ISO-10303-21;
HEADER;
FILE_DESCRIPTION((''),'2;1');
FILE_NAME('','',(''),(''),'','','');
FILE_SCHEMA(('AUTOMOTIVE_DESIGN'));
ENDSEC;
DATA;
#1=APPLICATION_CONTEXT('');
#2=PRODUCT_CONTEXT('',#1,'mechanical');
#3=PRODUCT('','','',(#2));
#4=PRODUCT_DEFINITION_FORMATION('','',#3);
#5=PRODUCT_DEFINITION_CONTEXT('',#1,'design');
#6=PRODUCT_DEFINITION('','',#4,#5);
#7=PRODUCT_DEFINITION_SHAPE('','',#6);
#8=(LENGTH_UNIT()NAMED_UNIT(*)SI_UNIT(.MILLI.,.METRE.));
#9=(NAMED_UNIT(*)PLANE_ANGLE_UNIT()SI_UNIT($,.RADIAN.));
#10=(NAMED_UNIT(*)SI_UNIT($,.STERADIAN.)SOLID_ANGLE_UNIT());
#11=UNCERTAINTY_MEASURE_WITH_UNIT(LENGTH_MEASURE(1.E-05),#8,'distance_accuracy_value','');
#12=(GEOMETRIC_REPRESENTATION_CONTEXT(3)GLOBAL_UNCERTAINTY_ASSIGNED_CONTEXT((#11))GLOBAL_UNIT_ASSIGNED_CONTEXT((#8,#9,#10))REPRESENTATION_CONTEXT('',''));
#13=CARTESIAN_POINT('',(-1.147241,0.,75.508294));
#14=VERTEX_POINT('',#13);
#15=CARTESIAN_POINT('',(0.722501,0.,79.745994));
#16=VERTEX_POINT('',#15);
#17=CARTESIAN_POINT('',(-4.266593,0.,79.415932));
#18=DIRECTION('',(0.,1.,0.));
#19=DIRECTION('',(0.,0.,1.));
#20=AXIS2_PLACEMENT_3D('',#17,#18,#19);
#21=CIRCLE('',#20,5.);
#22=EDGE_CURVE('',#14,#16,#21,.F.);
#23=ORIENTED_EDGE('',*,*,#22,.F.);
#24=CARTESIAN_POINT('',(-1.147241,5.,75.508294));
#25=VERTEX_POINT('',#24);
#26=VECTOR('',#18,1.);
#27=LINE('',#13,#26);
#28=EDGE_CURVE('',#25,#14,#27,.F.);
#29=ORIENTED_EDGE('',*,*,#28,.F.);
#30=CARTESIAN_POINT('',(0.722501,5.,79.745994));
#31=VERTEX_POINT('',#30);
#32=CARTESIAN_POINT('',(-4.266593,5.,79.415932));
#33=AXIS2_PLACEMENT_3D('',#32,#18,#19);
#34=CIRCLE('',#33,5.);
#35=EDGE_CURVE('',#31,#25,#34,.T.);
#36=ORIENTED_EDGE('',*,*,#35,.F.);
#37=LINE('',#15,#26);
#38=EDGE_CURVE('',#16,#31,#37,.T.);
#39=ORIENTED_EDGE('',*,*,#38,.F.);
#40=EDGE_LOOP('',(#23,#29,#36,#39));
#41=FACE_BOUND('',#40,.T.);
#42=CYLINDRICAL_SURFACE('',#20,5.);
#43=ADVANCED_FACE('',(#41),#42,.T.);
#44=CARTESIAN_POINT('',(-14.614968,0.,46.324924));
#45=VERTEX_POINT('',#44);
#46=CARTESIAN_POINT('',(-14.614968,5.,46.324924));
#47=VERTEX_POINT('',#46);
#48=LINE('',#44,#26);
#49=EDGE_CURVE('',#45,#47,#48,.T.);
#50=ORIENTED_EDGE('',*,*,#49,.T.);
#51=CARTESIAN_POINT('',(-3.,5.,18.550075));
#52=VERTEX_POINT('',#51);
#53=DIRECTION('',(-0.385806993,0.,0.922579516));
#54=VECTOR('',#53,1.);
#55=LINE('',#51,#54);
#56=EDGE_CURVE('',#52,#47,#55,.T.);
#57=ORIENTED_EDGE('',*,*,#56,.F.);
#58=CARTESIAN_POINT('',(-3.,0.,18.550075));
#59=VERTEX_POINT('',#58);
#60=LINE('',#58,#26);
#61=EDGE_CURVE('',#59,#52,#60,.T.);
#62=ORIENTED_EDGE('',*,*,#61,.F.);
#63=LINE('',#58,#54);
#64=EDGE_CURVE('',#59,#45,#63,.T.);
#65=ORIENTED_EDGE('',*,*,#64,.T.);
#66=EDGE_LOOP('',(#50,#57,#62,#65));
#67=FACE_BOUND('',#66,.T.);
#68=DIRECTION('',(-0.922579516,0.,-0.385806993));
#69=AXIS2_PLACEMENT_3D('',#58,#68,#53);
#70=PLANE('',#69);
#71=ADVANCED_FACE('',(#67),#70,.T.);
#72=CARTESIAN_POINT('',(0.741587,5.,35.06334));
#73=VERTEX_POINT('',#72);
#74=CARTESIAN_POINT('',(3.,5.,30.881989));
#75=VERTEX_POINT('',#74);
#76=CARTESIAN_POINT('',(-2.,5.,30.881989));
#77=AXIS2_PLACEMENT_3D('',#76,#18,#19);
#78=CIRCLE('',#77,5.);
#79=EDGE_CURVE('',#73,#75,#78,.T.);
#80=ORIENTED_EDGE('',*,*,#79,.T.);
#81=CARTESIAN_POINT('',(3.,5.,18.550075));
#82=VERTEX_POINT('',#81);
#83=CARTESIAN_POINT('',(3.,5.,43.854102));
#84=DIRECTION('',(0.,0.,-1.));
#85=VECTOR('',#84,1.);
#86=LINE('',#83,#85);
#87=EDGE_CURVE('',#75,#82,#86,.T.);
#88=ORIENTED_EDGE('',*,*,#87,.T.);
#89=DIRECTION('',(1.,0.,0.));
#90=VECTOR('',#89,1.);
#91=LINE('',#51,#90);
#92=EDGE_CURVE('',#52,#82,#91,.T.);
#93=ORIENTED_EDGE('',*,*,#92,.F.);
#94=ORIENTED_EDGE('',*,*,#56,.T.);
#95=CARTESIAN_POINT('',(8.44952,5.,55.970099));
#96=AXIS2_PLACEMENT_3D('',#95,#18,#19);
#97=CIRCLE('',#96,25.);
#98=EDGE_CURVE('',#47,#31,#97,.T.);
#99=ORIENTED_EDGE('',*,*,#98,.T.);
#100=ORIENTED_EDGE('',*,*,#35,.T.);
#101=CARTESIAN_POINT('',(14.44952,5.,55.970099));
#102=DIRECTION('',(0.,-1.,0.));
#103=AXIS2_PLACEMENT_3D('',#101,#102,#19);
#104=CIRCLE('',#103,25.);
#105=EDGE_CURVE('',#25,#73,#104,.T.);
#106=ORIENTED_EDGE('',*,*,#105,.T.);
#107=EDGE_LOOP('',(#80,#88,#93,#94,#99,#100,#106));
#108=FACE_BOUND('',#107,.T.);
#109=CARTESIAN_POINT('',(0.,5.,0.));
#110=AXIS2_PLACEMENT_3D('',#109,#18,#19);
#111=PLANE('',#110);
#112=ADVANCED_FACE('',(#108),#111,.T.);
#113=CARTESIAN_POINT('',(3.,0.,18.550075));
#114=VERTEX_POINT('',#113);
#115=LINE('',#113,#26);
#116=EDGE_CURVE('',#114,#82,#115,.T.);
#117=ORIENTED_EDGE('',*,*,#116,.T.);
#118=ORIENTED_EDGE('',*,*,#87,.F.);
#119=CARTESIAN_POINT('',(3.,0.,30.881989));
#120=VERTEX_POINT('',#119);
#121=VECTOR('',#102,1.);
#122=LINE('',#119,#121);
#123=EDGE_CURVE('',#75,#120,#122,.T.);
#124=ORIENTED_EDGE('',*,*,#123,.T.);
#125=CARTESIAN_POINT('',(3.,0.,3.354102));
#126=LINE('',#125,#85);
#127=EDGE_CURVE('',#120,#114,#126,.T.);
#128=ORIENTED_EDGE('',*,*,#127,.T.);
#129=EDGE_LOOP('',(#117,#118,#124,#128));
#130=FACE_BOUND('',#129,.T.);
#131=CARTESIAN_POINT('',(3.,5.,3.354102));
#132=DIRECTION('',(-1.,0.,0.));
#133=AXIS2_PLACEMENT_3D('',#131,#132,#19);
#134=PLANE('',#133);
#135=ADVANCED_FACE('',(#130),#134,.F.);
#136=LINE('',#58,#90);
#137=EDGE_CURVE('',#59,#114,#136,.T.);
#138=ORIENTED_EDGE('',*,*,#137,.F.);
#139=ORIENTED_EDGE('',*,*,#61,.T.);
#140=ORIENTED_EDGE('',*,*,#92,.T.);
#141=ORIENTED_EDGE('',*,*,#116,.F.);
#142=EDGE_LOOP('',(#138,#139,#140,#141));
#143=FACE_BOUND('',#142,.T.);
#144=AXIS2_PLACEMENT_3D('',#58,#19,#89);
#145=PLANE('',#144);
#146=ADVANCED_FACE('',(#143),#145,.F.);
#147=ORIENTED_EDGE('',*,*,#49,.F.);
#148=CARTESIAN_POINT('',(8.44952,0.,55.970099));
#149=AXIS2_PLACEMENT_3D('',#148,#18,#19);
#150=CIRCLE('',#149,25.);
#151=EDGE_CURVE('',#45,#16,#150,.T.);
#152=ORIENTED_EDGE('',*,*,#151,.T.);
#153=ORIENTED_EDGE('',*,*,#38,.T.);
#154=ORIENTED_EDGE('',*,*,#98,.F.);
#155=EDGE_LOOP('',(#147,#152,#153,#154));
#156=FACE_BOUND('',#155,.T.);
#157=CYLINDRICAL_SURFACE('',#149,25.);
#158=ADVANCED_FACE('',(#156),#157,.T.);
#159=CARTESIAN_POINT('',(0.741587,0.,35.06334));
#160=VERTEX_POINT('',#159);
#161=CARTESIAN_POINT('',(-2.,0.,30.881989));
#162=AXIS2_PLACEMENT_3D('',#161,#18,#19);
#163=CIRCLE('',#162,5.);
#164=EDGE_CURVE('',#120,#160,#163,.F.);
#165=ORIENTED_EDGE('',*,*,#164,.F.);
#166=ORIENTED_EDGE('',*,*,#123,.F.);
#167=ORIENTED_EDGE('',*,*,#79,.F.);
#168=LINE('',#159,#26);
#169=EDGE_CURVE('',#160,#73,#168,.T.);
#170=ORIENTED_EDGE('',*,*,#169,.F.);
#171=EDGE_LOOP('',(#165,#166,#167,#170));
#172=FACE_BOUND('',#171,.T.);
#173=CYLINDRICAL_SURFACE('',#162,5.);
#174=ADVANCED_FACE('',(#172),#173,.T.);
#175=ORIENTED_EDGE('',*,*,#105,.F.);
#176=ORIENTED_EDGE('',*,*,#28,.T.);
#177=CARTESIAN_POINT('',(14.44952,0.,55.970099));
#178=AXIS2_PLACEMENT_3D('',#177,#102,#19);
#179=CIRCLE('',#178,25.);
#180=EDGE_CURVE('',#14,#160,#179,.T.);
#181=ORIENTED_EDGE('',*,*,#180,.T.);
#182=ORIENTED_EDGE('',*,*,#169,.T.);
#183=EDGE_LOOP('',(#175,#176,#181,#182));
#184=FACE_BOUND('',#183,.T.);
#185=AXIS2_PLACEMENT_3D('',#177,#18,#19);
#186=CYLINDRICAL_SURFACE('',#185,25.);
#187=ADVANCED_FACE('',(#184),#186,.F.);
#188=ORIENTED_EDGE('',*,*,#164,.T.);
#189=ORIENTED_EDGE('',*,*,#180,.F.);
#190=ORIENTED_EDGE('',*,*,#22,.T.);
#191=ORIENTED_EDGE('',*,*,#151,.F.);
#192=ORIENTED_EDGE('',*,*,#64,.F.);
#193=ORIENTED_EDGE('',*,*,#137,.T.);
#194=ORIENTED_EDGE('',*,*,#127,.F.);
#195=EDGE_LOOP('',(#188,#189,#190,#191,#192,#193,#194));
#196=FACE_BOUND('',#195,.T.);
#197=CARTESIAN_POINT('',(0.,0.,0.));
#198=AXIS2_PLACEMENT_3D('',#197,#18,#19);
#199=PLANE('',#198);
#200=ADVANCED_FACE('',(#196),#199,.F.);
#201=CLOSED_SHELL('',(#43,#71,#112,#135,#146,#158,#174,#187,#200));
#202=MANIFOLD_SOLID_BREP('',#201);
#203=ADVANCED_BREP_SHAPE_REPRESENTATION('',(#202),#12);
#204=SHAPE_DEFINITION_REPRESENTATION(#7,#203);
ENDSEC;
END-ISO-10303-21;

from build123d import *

# Parameters (mm, degrees)
EXTRUDE_2_DEPTH     = 5
SKETCH_4_R          = 1.65
CUT_EXTRUDE_1_DEPTH = 5
EXTRUDE_3_DEPTH     = 5
CUT_EXTRUDE_START   = -4.5
SKETCH_7_R          = 3
CUT_EXTRUDE_2_DEPTH = 3
CUT_EXTRUDE_3_DEPTH = 7.5
EXTRUDE_4_DEPTH     = 5
FILLET_1_R          = 5
FILLET_2_R          = 5
CUT_EXTRUDE_START_2 = -5
CUT_EXTRUDE_5_DEPTH = 5


with BuildPart() as part:
    # 草图3 → 凸台-拉伸2 (new body)
    with BuildSketch(Plane(origin=(0, 0, 0), x_dir=(1, 0, 0), z_dir=(0, 1, 0))):
        with BuildLine():
            Line((-3, -3.354101966), (-3, -7.416198487))
            Line((-3, -7.416198487), (-3, -43.854101966))
            Line((-3, -43.854101966), (3, -43.854101966))
            Line((3, -43.854101966), (3, -10.583005244))
            Line((3, -10.583005244), (3, -7.416198487))
            Line((3, -7.416198487), (3, -3.354101966))
            ThreePointArc((3, -3.354101966), (0, 4.5), (-3, -3.354101966))
        make_face()
    extrude(amount=EXTRUDE_2_DEPTH)

    # 草图4 → 切除-拉伸1 (cut)
    with BuildSketch(Plane(origin=(0, 5, 0), x_dir=(1, 0, 0), z_dir=(0, 1, 0))):
        with Locations(Location((0, 0, 0), (0, 0, 270))):
            Circle(SKETCH_4_R)
    extrude(amount=-CUT_EXTRUDE_1_DEPTH, mode=Mode.SUBTRACT)

    # 草图6 → 凸台-拉伸3 (add)
    with BuildSketch(Plane(origin=(0, 5, 0), x_dir=(1, 0, 0), z_dir=(0, 1, 0))):
        with BuildLine():
            Line((3, -33.74604712), (-3, -33.74604712))
            ThreePointArc((-3, -33.74604712), (-16.46902092, -57.986607816), (0.722500961, -79.745993902))
            Line((0.722500961, -79.745993902), (1.949520222, -77.620734201))
            ThreePointArc((1.949520222, -77.620734201), (-10.543317179, -55.371702353), (3, -33.74604712))
        make_face()
    extrude(amount=-EXTRUDE_3_DEPTH)

    # 草图7 → 切除-拉伸2 (cut)
    with BuildSketch(Plane(origin=(0, 5, 0), x_dir=(1, 0, 0), z_dir=(0, 1, 0)).offset(CUT_EXTRUDE_START)):
        with Locations(Location((0, 0, 0), (0, 0, 270))):
            Circle(SKETCH_7_R)
    extrude(amount=-CUT_EXTRUDE_2_DEPTH, mode=Mode.SUBTRACT)

    # 草图8 → 切除-拉伸3 (cut)
    with BuildSketch(Plane(origin=(0, 5, 0), x_dir=(1, 0, 0), z_dir=(0, 1, 0))):
        with BuildLine():
            Line((-3, -38.067187498), (-3, -43.854101966))
            Line((-3, -43.854101966), (3, -43.854101966))
            Line((3, -43.854101966), (3, -33.74604712))
            ThreePointArc((3, -33.74604712), (-0.160637142, -35.683569047), (-3, -38.067187498))
        make_face()
    extrude(amount=-CUT_EXTRUDE_3_DEPTH, mode=Mode.SUBTRACT)

    # 草图9 → 凸台-拉伸4 (add)
    with BuildSketch(Plane(origin=(0, 5, 0), x_dir=(1, 0, 0), z_dir=(0, 1, 0))):
        with BuildLine():
            Line((-3, -18.550074543), (-14.614967684, -46.324924269))
            ThreePointArc((-14.614967684, -46.324924269), (-9.917875534, -39.010182445), (-3, -33.74604712))
            Line((-3, -33.74604712), (-3, -18.550074543))
        make_face()
    extrude(amount=-EXTRUDE_4_DEPTH)

    # 圆角1
    fillet_1_edges = [part.edges().sort_by_distance(p)[0] for p in [
        (3, 2.5, 33.74604712),
    ]]
    fillet(fillet_1_edges, radius=FILLET_1_R)

    # 圆角2
    # the kernel refuses this fillet: 5 mm, written as the material it takes off along each edge
    with BuildSketch(Plane(origin=(1.949520222, 14.371610933, 77.620734201), x_dir=(-0.8261015944022844, 0, -0.5635212114250925), z_dir=(0, -1, 0))) as fillet_2_piece_1:
        with BuildLine():
            CenterArc((4.123508811, -4.985927863), FILLET_2_R, 94.299664485, 55.185648669)
            Line((-0.183986354, -2.447131808), (-0.270136257, -2.396355887))
            ThreePointArc((-0.270136257, -2.396355887), (-0.191711734, -1.216068615), (-0.099718557, 0.007497289))
            Line((-0.099718557, 0.007497289), (0.007497289, 0.099718557))
            ThreePointArc((0.007497289, 0.099718557), (1.874322187, 0.029639314), (3.741147084, 0.099718557))
            Line((3.741147084, 0.099718557), (3.748644373, 0))
        make_face()
    extrude(amount=23.743221866, mode=Mode.SUBTRACT)

    # 草图10 → 切除-拉伸5 (cut)
    with BuildSketch(Plane(origin=(0, 5, 0), x_dir=(1, 0, 0), z_dir=(0, 1, 0)).offset(CUT_EXTRUDE_START_2)):
        with BuildLine():
            Line((-3, -18.550074543), (3, -18.550074543))
            Line((3, -18.550074543), (3, -3.354101966))
            ThreePointArc((3, -3.354101966), (0, 4.5), (-3, -3.354101966))
            Line((-3, -3.354101966), (-3, -18.550074543))
        make_face()
    extrude(amount=CUT_EXTRUDE_5_DEPTH, mode=Mode.SUBTRACT)


solid = part.part
